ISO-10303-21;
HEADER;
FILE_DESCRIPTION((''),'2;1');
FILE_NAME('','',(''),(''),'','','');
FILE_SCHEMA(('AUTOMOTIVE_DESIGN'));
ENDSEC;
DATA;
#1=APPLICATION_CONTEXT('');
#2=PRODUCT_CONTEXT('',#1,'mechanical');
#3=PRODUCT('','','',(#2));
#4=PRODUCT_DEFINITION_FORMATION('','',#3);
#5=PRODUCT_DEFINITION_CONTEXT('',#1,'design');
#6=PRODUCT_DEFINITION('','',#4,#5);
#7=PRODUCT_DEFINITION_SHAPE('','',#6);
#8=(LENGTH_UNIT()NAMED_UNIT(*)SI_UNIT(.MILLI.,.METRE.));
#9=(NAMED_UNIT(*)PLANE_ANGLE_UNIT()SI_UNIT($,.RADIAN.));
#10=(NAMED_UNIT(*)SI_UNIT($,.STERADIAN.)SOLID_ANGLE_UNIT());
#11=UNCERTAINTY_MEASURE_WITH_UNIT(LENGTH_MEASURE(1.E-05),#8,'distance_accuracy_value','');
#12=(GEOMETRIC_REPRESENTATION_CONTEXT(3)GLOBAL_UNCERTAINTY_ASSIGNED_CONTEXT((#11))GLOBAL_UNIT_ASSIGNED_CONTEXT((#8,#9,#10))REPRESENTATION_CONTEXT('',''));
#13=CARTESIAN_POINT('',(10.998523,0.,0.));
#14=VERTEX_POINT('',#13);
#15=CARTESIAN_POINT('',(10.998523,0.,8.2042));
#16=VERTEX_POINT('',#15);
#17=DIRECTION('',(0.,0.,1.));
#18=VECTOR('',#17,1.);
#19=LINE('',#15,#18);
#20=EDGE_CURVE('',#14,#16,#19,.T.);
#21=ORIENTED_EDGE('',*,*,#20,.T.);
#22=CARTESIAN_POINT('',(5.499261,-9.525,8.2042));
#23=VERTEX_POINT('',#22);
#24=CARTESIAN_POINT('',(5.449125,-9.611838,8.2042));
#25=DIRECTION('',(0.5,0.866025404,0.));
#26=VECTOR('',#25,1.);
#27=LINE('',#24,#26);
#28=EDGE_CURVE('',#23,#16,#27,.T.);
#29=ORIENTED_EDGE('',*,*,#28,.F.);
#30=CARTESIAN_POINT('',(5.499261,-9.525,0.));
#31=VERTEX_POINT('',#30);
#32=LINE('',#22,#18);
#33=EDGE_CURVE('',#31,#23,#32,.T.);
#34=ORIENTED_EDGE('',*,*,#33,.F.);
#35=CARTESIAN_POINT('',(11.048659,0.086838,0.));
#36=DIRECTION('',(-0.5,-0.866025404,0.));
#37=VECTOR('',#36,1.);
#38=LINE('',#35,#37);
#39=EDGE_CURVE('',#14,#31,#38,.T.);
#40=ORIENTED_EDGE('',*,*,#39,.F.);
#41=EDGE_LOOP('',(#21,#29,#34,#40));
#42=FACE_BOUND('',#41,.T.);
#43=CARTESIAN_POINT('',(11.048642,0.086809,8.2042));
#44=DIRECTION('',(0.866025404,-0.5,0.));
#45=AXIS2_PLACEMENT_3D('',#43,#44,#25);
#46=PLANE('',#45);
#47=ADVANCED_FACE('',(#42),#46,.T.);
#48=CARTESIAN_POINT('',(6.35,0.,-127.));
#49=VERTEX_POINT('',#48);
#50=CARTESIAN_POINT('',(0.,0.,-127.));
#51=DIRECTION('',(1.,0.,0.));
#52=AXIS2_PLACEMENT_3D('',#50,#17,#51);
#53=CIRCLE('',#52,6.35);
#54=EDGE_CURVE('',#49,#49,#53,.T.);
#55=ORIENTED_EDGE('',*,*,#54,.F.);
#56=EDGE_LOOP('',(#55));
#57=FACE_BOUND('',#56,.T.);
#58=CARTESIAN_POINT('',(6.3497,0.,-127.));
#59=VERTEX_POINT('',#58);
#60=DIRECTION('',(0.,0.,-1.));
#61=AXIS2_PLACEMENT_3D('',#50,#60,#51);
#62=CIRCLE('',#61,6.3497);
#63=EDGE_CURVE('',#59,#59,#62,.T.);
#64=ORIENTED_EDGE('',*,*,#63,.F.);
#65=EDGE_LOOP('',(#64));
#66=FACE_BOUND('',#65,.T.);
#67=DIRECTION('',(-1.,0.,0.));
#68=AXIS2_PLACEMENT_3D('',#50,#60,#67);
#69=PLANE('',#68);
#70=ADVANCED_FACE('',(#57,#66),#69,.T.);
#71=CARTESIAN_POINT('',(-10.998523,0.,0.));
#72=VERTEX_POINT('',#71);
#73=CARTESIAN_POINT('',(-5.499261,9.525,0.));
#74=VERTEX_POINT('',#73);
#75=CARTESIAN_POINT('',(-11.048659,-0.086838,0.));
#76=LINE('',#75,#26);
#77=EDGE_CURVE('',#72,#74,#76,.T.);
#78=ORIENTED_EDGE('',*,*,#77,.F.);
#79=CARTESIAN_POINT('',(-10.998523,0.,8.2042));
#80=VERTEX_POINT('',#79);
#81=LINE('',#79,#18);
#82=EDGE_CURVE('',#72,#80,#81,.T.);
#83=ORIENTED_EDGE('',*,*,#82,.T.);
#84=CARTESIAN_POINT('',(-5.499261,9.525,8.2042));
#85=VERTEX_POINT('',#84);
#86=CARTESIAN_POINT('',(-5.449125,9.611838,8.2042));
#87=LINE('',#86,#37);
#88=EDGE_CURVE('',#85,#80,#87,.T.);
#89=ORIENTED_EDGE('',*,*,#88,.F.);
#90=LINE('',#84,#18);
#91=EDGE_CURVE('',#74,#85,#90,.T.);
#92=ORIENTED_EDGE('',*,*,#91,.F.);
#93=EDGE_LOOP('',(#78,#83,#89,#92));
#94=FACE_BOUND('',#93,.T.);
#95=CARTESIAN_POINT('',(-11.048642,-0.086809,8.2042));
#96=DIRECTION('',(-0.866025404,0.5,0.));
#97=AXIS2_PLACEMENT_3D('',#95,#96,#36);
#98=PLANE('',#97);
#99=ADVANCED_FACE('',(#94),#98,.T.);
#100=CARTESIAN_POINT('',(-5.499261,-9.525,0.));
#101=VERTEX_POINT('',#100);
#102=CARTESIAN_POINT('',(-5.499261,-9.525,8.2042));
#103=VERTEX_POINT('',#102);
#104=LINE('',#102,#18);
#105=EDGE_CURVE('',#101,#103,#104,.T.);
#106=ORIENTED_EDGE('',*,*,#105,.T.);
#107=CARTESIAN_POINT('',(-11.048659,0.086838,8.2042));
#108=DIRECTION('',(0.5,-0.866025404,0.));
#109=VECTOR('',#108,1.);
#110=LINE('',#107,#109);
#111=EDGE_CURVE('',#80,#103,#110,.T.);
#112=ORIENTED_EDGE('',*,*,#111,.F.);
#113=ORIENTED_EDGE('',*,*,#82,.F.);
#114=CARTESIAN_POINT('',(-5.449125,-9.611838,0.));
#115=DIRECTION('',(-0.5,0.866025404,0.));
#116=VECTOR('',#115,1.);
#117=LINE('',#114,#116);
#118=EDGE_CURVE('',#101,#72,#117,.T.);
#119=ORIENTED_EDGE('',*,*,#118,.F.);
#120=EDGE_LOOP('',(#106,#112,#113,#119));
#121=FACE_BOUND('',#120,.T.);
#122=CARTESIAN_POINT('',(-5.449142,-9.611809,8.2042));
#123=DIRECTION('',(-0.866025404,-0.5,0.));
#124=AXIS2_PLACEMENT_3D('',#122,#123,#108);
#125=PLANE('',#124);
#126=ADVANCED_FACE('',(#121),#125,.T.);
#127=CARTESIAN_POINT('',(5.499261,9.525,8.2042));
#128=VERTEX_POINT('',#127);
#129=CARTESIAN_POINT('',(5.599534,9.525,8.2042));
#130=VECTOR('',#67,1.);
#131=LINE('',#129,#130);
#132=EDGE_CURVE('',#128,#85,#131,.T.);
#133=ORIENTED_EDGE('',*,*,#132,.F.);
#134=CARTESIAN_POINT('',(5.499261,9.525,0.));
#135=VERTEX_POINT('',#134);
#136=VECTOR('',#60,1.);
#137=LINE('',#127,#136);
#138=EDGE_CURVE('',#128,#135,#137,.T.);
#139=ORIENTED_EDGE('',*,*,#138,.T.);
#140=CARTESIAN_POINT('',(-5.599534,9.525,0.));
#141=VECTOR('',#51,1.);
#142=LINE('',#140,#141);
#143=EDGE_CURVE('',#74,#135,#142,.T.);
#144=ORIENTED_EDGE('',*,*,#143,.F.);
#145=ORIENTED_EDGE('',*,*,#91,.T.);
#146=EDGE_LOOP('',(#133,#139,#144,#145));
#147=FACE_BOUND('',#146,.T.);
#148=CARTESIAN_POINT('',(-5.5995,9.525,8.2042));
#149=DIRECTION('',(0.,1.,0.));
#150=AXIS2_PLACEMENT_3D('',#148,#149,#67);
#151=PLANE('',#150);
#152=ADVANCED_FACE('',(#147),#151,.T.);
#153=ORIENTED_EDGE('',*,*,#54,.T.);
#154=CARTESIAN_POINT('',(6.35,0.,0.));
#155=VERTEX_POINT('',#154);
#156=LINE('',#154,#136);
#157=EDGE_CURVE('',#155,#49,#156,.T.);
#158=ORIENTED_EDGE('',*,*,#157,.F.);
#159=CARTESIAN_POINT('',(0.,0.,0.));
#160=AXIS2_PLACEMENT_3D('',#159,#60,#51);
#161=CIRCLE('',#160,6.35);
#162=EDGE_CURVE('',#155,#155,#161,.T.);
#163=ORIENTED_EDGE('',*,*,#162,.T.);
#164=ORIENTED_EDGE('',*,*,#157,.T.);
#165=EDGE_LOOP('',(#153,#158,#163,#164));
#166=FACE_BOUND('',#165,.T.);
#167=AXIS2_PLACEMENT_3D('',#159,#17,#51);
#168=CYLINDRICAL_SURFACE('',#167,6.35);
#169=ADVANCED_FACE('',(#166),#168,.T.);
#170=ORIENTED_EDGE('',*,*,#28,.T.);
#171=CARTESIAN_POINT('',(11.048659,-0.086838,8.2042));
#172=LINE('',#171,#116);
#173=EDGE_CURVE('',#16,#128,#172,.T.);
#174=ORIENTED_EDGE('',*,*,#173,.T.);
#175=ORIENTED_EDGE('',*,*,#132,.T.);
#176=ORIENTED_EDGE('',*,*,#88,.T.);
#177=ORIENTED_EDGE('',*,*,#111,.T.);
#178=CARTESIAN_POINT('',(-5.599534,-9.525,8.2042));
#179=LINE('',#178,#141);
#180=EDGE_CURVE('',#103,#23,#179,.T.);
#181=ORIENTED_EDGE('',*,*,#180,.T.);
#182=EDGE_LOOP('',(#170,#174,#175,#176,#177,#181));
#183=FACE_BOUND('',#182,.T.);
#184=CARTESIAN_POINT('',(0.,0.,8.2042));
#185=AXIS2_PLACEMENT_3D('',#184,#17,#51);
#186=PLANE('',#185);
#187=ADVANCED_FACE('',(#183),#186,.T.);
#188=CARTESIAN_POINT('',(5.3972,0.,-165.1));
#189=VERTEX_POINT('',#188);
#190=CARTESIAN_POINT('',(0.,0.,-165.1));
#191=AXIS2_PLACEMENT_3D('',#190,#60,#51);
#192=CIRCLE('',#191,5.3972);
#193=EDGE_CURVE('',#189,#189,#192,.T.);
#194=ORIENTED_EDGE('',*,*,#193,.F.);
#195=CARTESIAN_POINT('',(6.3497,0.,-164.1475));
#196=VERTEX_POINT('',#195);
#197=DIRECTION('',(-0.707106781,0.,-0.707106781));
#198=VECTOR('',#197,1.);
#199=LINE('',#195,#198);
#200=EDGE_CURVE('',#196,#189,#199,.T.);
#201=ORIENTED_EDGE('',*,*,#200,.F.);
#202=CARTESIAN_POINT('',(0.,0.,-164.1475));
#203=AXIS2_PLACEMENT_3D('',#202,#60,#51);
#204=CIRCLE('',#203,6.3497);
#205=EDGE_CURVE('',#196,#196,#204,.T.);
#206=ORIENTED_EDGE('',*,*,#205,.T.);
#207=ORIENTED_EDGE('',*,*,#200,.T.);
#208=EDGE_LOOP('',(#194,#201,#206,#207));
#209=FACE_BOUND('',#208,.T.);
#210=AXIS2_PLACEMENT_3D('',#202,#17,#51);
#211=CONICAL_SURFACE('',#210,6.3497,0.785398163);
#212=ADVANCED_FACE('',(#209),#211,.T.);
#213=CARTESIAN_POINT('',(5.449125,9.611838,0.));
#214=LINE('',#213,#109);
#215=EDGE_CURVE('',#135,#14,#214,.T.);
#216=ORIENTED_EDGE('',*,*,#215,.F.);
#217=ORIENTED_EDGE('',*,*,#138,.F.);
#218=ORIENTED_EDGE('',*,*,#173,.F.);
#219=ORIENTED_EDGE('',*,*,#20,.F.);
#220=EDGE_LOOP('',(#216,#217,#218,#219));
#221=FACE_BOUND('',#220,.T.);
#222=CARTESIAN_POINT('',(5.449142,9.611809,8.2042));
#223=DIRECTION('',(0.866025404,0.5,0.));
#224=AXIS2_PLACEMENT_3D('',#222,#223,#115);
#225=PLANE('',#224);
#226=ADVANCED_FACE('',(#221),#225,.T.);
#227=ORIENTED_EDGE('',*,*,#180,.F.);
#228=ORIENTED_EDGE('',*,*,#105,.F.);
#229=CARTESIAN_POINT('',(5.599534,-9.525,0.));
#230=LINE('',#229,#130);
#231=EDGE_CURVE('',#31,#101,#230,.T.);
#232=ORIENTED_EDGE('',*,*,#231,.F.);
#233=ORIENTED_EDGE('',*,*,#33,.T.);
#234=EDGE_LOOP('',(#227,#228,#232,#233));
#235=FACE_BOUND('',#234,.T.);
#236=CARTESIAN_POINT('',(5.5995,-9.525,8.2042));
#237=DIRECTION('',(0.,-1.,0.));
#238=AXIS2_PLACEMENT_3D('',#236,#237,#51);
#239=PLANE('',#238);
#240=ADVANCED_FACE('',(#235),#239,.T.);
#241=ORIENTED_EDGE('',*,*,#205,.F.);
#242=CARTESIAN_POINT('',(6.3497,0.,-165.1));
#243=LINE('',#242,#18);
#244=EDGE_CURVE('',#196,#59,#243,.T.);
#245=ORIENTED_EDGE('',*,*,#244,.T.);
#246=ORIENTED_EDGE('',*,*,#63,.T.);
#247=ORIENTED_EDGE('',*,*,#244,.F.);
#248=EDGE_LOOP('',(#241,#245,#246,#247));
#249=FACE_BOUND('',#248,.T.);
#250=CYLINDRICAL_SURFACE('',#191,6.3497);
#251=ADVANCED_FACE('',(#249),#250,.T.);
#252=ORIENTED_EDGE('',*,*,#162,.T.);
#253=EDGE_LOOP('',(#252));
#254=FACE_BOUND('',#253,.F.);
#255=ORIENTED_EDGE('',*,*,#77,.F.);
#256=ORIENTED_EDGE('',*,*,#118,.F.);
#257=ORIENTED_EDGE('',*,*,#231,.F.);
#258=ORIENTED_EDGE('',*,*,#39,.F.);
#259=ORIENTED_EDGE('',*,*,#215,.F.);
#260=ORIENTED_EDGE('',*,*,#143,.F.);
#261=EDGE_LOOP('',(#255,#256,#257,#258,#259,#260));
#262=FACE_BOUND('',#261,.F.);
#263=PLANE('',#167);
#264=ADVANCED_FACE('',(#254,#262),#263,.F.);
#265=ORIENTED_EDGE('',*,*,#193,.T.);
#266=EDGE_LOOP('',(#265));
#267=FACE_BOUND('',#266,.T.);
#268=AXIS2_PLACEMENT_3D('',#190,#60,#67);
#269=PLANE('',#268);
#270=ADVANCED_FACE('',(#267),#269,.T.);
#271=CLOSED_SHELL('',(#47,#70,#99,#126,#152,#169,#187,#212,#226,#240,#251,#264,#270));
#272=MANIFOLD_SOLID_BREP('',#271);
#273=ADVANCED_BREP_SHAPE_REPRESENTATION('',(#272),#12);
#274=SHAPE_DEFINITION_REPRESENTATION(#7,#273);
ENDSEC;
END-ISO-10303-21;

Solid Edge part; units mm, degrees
sketch "Sketch1" plane through (0, 0, 0) normal (0, 0, 1) x (1, 0, 0)
  circle A0 centre (0, 0) radius 11.049
  dimension "D1" = 22.098
extrude "Protrusion1" add sketch "Sketch1" along normal blind 8.2042
sketch "Sketch2" plane through (0, 0, 0) normal (0, 0, -1) x (1, 0, 0)
  circle A0 centre (0, 0) radius 6.35
extrude "Protrusion2" add sketch "Sketch2" along normal blind 165.1
sketch "Sketch3" plane through (0, 0, -165.1) normal (0, 0, -1) x (1, 0, 0)
  circle A0 centre (0, 0) radius 6.3497
extrude "Cutout1" cut sketch "Sketch3" against normal blind 38.1 flip side to cut
chamfer "Chamfer_1" distance 0.9525 angle 45 1 edges at (-6.3497, 0, -165.1)
sketch "Sketch4" plane through (0, 0, 8.2042) normal (0, 0, 1) x (1, 0, 0)
  line L0 (-5.5995, 9.525) -> (5.5995, 9.525)
  dimension "D1" = 19.05
extrude "Cutout2" cut sketch "Sketch4" against normal up to next material side at (0, 9.575, 8.2042)
pattern_circular "Pattern1" count 6 over 360 about axis through (0, 0, 8.2042) along (0, 0, 1) of "Cutout2"
properties part number "24106279"
